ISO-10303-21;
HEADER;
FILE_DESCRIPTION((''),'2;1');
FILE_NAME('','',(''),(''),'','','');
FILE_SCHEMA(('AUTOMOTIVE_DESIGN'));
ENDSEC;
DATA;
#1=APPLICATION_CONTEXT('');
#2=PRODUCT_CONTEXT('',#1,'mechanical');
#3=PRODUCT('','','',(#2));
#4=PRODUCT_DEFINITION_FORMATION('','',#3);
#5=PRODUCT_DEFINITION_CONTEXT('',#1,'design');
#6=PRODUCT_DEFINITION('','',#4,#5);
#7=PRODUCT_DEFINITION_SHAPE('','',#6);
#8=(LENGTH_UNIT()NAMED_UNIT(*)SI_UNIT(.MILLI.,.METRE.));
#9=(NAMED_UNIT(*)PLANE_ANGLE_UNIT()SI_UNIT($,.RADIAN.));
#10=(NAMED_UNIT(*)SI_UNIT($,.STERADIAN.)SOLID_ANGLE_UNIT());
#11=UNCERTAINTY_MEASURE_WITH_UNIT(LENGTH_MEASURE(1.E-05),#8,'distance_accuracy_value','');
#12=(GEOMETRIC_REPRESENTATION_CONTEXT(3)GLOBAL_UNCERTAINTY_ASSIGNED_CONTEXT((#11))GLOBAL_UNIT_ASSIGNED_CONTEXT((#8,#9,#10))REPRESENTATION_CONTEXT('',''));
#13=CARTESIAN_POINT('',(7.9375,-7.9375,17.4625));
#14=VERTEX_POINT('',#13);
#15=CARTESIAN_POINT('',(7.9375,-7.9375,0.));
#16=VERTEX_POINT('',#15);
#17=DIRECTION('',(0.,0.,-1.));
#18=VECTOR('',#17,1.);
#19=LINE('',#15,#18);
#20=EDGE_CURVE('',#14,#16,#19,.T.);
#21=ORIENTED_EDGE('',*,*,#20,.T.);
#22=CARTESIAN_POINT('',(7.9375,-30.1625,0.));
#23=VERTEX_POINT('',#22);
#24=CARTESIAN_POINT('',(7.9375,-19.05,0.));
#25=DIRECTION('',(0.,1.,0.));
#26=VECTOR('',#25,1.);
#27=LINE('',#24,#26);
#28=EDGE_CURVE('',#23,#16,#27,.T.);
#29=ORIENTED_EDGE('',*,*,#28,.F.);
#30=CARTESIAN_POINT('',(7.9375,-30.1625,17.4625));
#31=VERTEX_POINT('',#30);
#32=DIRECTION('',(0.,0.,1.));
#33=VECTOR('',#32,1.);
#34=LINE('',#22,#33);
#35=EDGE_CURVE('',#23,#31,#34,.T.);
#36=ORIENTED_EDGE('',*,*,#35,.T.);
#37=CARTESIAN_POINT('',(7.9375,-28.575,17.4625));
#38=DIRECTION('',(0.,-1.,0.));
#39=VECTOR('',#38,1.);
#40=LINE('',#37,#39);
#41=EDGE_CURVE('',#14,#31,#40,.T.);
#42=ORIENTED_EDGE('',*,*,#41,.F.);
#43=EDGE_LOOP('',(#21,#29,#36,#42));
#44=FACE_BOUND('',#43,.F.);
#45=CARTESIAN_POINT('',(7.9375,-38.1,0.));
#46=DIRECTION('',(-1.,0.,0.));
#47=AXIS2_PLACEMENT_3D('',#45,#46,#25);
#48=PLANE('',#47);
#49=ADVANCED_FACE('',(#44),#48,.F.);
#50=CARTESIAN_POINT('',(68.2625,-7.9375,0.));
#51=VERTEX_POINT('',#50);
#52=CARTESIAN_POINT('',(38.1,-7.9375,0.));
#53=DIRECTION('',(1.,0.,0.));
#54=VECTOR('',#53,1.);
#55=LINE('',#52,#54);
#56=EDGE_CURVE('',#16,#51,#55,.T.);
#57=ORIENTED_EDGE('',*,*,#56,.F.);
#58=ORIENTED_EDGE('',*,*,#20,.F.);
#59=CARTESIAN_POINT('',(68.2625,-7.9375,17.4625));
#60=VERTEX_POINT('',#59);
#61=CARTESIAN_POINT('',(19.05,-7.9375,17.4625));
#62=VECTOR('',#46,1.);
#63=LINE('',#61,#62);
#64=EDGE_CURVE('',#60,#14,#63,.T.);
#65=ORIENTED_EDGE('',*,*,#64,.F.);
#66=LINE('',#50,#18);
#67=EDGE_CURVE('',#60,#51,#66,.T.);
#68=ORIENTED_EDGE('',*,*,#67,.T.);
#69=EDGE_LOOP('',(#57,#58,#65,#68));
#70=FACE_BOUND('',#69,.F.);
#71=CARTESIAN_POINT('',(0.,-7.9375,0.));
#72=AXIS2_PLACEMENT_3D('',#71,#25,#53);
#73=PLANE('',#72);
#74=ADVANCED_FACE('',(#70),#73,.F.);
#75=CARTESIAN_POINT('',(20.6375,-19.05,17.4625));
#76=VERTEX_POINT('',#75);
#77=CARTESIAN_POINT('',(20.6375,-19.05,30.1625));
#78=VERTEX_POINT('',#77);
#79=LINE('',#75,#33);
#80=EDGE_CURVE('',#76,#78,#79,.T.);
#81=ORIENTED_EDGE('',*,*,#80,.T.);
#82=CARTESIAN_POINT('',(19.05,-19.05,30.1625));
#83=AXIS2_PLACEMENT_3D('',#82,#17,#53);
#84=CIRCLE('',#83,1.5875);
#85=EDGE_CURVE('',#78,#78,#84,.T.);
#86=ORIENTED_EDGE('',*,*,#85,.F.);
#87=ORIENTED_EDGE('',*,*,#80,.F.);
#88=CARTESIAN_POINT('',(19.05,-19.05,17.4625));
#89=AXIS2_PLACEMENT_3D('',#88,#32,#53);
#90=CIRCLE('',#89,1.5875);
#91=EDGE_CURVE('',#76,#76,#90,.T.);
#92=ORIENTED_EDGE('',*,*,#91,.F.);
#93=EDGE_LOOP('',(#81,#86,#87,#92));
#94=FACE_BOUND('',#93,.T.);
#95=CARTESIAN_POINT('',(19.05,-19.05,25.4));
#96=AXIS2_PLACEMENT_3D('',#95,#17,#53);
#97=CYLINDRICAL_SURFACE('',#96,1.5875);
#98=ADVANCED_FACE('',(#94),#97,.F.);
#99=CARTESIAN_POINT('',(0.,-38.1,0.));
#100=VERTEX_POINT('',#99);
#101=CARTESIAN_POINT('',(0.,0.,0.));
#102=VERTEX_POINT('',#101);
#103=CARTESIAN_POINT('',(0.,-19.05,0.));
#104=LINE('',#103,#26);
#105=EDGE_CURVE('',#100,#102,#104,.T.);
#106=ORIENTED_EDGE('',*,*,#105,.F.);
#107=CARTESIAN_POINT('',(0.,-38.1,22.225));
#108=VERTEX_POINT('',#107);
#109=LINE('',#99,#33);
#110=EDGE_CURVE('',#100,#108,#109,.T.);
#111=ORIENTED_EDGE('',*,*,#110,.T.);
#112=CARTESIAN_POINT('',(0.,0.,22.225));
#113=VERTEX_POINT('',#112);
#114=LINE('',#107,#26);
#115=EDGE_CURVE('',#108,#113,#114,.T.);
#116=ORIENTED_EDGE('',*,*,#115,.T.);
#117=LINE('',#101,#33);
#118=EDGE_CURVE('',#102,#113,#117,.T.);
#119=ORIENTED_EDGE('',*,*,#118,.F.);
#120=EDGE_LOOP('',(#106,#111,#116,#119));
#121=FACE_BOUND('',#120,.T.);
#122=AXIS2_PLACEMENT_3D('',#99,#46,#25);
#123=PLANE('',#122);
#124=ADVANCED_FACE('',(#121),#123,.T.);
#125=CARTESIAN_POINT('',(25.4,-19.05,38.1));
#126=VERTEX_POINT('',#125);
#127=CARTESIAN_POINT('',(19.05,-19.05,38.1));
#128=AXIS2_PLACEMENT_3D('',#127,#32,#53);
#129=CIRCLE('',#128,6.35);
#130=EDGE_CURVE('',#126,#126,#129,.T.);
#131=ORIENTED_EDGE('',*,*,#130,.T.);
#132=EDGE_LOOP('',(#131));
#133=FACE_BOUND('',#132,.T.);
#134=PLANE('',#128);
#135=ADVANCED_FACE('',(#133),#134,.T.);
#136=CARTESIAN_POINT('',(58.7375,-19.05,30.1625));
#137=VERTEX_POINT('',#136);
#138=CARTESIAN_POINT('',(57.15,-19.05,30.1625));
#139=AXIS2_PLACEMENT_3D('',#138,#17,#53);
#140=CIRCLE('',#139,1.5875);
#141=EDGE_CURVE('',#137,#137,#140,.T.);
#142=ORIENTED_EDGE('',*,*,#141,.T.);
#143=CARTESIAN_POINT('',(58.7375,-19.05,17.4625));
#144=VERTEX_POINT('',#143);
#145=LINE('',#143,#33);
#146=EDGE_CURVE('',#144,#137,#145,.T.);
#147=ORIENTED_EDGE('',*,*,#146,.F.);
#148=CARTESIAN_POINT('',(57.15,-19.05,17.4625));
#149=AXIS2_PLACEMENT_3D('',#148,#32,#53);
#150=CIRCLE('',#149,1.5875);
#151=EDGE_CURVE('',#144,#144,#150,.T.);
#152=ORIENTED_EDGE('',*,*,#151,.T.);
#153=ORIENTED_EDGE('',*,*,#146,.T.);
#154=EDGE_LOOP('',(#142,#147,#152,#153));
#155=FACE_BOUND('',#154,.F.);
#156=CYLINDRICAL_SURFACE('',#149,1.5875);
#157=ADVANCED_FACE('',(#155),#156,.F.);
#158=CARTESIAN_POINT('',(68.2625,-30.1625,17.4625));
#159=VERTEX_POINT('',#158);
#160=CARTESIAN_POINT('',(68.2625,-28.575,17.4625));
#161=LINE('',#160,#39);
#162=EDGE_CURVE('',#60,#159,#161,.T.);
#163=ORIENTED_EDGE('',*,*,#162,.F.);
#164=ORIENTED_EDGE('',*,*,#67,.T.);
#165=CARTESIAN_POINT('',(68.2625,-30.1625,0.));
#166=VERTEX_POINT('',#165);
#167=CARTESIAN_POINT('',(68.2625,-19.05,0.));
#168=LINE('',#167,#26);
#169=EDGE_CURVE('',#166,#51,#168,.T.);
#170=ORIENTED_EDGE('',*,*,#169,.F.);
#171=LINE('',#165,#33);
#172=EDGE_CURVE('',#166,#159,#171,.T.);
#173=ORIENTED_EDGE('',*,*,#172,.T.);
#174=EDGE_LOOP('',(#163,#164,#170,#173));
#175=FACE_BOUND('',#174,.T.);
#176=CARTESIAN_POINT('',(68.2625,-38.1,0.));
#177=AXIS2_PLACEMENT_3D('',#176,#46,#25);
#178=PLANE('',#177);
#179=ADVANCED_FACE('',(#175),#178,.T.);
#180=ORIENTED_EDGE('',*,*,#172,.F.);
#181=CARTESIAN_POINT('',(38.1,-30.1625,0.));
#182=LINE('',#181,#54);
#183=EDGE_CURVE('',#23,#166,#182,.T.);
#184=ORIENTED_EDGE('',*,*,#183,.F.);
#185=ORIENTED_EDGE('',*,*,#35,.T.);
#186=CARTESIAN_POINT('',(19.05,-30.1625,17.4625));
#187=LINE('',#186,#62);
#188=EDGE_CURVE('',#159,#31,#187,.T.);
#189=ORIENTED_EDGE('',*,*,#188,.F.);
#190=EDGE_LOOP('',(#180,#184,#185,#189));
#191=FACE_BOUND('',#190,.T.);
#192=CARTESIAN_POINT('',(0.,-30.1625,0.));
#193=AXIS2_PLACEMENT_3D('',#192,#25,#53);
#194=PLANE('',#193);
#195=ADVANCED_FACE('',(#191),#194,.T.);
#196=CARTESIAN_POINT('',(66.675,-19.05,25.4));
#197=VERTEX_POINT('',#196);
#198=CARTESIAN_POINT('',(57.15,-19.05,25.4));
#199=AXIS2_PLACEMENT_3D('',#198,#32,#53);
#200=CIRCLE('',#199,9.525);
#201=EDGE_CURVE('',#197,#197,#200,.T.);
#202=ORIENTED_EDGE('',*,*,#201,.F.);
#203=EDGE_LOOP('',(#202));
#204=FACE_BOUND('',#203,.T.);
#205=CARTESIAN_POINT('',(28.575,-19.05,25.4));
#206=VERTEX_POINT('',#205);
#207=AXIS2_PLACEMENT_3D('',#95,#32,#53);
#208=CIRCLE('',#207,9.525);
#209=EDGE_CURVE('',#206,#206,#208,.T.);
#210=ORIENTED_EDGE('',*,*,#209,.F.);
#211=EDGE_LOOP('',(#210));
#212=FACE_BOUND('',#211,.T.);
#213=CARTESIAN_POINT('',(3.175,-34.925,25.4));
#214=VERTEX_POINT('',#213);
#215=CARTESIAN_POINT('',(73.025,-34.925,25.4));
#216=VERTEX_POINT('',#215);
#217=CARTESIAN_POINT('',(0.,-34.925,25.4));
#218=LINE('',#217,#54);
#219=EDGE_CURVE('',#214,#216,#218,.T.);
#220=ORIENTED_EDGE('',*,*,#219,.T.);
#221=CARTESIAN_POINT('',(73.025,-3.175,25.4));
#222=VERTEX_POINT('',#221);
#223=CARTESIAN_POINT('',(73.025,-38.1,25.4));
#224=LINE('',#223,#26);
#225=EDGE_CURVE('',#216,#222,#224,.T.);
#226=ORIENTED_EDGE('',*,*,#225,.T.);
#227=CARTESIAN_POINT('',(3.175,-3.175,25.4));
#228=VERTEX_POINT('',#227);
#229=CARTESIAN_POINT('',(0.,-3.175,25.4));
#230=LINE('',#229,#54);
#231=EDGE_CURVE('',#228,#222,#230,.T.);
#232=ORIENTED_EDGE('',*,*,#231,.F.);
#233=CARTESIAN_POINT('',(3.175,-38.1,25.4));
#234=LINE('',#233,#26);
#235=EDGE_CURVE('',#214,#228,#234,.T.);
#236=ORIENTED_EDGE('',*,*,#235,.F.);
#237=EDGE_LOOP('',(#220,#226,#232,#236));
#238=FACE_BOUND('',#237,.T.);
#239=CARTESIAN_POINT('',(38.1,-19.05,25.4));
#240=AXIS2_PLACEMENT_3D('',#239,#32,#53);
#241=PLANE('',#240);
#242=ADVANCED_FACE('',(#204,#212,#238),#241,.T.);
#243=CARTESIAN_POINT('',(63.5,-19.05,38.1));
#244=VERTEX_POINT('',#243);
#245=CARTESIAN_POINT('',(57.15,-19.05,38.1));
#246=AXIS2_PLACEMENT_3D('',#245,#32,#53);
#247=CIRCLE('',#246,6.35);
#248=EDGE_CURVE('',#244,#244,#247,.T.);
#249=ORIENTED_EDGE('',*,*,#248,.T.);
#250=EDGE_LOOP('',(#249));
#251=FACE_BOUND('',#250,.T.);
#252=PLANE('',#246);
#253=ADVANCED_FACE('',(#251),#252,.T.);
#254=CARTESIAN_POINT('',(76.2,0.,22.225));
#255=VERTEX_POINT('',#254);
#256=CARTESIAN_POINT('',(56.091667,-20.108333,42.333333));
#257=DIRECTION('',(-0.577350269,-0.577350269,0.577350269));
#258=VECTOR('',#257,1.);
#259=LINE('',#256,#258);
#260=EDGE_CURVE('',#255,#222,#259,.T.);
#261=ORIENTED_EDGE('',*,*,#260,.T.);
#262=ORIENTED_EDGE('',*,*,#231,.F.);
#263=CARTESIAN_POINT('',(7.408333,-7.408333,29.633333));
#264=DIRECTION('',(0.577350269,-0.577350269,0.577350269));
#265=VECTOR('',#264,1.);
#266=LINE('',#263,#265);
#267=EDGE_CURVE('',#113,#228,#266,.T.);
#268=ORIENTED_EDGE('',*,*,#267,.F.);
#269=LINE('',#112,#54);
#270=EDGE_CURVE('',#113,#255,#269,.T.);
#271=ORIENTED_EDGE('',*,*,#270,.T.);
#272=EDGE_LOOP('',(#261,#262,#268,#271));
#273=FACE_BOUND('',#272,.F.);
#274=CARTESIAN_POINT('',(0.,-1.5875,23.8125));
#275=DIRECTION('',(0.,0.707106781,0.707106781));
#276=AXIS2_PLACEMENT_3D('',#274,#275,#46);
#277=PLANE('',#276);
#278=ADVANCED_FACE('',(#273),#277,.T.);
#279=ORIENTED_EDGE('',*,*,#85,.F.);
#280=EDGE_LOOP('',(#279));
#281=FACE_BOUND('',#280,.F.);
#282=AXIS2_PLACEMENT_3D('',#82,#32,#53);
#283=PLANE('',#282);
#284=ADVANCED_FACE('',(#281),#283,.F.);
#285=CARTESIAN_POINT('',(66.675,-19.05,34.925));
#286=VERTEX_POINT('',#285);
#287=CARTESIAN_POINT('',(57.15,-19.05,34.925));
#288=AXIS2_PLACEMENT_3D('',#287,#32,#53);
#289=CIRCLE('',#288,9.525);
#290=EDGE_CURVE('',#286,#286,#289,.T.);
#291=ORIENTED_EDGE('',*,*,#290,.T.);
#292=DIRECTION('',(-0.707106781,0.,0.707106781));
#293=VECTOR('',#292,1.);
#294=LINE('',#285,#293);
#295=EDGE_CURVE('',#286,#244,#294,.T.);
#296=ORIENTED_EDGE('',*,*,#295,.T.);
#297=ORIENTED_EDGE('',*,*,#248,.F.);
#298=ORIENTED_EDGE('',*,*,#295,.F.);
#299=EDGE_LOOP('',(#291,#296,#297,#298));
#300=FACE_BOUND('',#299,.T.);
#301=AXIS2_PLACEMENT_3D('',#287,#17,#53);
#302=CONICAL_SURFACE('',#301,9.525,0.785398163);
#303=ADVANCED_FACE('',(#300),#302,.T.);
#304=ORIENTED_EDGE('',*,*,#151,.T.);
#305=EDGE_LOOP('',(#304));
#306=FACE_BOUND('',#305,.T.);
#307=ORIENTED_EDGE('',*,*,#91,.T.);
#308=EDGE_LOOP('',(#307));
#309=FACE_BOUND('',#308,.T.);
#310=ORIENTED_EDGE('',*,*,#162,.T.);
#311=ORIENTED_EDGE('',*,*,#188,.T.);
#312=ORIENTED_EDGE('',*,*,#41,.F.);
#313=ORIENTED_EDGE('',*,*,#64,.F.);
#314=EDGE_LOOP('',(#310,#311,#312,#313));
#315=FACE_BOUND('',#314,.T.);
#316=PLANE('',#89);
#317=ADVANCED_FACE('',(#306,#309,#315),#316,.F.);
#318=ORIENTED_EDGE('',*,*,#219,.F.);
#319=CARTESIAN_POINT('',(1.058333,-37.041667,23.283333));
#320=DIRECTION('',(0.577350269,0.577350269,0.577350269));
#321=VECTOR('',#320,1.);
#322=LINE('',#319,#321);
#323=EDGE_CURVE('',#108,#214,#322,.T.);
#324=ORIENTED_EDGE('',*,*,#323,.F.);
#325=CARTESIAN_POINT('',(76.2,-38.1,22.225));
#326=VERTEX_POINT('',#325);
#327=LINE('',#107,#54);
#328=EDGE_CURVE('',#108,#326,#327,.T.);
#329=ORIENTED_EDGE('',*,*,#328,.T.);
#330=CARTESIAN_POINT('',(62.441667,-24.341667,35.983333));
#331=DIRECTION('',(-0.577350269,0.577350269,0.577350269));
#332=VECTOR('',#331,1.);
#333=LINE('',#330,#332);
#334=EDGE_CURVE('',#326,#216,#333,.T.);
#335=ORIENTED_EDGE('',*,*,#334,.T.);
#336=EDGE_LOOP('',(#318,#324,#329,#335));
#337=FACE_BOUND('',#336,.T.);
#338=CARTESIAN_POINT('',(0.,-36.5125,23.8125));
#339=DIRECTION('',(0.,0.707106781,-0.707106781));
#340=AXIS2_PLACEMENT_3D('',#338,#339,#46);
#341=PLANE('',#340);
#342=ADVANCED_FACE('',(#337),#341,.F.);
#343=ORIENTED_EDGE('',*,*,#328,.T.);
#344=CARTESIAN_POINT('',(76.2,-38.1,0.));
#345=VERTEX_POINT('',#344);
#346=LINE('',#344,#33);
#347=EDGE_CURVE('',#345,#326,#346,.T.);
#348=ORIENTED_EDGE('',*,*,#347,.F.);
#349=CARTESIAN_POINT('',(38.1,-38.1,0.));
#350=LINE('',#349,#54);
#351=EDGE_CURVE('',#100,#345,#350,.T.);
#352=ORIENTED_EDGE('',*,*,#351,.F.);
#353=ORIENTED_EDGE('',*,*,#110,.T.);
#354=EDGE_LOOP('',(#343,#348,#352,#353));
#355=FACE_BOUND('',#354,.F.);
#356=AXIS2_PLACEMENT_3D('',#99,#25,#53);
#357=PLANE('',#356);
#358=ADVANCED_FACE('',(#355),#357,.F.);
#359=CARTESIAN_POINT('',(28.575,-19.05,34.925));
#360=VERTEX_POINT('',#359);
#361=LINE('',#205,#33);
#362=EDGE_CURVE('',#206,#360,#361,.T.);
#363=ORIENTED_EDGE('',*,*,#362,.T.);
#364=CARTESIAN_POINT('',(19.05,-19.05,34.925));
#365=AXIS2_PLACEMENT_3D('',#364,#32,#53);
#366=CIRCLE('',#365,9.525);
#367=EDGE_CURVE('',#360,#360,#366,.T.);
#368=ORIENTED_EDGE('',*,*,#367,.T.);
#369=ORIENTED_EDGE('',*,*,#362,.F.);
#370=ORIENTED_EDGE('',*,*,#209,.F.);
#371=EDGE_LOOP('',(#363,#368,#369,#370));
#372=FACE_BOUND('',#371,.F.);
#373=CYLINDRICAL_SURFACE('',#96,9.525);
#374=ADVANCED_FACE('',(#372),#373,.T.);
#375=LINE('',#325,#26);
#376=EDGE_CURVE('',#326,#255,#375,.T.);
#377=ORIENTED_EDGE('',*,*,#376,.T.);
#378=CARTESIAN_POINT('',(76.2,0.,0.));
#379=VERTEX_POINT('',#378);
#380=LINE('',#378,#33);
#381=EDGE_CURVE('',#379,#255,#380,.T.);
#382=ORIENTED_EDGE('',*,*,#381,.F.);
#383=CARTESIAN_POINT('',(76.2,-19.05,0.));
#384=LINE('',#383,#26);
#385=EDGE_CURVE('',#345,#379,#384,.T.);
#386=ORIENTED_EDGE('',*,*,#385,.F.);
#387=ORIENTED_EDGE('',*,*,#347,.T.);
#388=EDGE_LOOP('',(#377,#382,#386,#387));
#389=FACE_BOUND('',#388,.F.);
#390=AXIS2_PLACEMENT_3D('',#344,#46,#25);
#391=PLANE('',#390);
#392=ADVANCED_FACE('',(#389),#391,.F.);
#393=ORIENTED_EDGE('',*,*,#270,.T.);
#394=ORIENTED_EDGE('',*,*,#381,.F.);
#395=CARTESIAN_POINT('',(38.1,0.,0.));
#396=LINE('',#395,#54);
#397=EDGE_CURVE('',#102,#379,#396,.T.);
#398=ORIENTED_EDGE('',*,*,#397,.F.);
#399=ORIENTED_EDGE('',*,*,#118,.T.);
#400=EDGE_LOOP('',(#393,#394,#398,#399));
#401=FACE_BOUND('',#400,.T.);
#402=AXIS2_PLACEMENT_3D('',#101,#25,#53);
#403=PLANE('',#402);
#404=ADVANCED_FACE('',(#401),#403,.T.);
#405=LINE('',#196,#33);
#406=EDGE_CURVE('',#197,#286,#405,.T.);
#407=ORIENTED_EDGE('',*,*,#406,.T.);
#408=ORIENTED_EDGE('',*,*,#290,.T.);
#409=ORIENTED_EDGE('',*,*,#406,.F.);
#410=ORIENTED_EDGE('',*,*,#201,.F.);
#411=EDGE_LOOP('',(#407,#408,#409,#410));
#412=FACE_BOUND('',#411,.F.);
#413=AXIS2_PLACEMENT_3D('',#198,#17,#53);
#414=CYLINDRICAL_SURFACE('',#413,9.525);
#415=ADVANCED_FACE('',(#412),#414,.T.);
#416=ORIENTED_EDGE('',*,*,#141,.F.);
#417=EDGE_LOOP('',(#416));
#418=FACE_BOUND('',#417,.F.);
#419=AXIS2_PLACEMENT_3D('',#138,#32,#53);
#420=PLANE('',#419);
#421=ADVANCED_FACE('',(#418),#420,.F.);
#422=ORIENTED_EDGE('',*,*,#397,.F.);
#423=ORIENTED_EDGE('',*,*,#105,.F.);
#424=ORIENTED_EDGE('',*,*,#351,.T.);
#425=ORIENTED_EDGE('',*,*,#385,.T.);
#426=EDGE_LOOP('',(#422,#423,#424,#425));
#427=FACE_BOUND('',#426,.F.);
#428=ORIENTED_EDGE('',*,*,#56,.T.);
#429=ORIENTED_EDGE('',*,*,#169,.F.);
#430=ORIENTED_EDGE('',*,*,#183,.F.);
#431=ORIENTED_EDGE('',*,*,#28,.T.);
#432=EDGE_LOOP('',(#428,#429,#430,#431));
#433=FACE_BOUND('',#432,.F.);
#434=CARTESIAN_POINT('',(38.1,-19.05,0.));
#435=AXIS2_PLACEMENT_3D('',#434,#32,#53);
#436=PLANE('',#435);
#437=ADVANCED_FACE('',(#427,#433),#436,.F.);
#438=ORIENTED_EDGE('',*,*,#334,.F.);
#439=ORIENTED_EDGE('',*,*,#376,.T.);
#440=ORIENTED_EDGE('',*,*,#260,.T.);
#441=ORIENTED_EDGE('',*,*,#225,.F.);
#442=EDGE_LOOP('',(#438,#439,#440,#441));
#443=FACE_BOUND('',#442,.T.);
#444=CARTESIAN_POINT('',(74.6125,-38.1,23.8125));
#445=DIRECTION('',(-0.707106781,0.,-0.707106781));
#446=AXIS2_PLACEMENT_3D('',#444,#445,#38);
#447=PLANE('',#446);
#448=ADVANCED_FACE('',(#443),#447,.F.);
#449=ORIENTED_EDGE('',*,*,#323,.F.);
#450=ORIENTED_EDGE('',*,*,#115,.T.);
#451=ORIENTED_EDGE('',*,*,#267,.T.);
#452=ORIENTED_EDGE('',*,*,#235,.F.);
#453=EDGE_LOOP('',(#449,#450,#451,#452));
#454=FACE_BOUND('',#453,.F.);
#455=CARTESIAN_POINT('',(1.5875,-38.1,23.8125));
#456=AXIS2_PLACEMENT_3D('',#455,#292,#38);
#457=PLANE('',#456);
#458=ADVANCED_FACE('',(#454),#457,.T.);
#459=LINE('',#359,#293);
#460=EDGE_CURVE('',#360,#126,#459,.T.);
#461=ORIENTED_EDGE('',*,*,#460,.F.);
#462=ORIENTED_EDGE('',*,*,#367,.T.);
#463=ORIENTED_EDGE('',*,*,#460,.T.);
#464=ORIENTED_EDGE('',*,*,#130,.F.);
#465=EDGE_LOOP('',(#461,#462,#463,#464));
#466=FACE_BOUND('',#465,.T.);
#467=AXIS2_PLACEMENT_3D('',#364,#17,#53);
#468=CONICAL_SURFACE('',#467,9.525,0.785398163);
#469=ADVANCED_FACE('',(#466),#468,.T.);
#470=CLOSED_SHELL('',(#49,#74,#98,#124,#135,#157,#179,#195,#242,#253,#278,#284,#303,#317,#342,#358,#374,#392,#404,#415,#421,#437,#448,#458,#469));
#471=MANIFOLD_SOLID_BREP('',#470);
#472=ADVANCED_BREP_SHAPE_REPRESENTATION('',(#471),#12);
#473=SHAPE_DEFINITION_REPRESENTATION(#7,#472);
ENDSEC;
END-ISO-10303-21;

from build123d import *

# Parameters (mm, degrees)
F0_W     = 76.2
F0_H     = 38.1
F1_DEPTH = 25.4
F2_SIZE  = 3.175
F3_R     = 9.525
F4_DEPTH = 12.7
F5_SIZE2 = 3.175
F5_SIZE  = 3.175
F6_T     = 7.9375


# Not quite as in the source:
# - a shell that OpenCascade refuses in one call is made with other operations: the cavity is built on its own and cut out


with BuildPart() as f1:
    # F0 (on Top) → F1 (new body)
    with BuildSketch(Plane.XY):
        with Locations((38.1, -19.05)):
            Rectangle(F0_W, F0_H)
    extrude(amount=F1_DEPTH)

    # F2
    f2_edges = [f1.edges().sort_by_distance(p)[0] for p in [
        (38.1, -38.1, 25.4),
        (76.2, -19.05, 25.4),
        (38.1, 0, 25.4),
        (0, -19.05, 25.4),
    ]]
    chamfer(f2_edges, length=F2_SIZE)

    # F3 (on face) → F4 (join)
    with BuildSketch(Plane.XY.offset(25.4)):
        with Locations((19.05, -19.05)):
            Circle(F3_R)
        with Locations((57.15, -19.05)):
            Circle(F3_R)
    extrude(amount=F4_DEPTH)

    # F5
    f5_edges = [f1.edges().sort_by_distance(p)[0] for p in [
        (9.525, -19.05, 38.1),
        (47.625, -19.05, 38.1),
    ]]
    chamfer(f5_edges, length=F5_SIZE, length2=F5_SIZE2)

    # F6: shell of thickness 7.9375, made by hand


with BuildPart() as f6_core1:
    # F6_t2: copy of F1
    add(f1.part)

    # the walls: a layer under each face that stays
    f6_faces = [f6_core1.faces().sort_by_distance(p)[0] for p in [
        (9.525, -19.05, 30.1625),
        (11.1125, -19.05, 36.5125),
        (38.1, -19.05, 25.4),
        (19.05, -19.05, 38.1),
        (38.1, -36.5125, 23.8125),
        (1.5875, -19.05, 23.8125),
        (74.6125, -19.05, 23.8125),
        (38.1, -1.5875, 23.8125),
        (47.625, -19.05, 30.1625),
        (38.1, -38.1, 11.1125),
        (0, -19.05, 11.1125),
        (76.2, -19.05, 11.1125),
        (38.1, 0, 11.1125),
        (49.2125, -19.05, 36.5125),
        (57.15, -19.05, 38.1),
    ]]
    thicken(f6_faces, amount=-F6_T, mode=Mode.SUBTRACT)

    # F6_s3 → F6_t4 (revolve, cut)
    with BuildSketch(Plane.XZ.offset(19.05)):
        Polygon((28.654375, 25.479375), (20.6375, 25.4), (20.6375, 17.4625), (28.575, 17.4625), align=None)
    revolve(axis=Axis((19.05, -19.05, 25.4), (0, 0, 1)), mode=Mode.SUBTRACT)

    # F6_s5 → F6_t6 (revolve, cut)
    with BuildSketch(Plane.XZ.offset(19.05)):
        Polygon((66.754375, 25.479375), (66.675, 17.4625), (58.7375, 17.4625), (58.7375, 25.4), align=None)
    revolve(axis=Axis((57.15, -19.05, 25.4), (0, 0, 1)), mode=Mode.SUBTRACT)


with BuildPart() as f1_1:
    add(f1.part)

    # what is left inside the walls is the cavity
    f6_cavity = [f6_core1.part.solids().sort_by_distance(p)[0] for p in [
        (38.1, -22.754167, 0.079375),
    ]]
    add(f6_cavity, mode=Mode.SUBTRACT)


solid = f1_1.part
